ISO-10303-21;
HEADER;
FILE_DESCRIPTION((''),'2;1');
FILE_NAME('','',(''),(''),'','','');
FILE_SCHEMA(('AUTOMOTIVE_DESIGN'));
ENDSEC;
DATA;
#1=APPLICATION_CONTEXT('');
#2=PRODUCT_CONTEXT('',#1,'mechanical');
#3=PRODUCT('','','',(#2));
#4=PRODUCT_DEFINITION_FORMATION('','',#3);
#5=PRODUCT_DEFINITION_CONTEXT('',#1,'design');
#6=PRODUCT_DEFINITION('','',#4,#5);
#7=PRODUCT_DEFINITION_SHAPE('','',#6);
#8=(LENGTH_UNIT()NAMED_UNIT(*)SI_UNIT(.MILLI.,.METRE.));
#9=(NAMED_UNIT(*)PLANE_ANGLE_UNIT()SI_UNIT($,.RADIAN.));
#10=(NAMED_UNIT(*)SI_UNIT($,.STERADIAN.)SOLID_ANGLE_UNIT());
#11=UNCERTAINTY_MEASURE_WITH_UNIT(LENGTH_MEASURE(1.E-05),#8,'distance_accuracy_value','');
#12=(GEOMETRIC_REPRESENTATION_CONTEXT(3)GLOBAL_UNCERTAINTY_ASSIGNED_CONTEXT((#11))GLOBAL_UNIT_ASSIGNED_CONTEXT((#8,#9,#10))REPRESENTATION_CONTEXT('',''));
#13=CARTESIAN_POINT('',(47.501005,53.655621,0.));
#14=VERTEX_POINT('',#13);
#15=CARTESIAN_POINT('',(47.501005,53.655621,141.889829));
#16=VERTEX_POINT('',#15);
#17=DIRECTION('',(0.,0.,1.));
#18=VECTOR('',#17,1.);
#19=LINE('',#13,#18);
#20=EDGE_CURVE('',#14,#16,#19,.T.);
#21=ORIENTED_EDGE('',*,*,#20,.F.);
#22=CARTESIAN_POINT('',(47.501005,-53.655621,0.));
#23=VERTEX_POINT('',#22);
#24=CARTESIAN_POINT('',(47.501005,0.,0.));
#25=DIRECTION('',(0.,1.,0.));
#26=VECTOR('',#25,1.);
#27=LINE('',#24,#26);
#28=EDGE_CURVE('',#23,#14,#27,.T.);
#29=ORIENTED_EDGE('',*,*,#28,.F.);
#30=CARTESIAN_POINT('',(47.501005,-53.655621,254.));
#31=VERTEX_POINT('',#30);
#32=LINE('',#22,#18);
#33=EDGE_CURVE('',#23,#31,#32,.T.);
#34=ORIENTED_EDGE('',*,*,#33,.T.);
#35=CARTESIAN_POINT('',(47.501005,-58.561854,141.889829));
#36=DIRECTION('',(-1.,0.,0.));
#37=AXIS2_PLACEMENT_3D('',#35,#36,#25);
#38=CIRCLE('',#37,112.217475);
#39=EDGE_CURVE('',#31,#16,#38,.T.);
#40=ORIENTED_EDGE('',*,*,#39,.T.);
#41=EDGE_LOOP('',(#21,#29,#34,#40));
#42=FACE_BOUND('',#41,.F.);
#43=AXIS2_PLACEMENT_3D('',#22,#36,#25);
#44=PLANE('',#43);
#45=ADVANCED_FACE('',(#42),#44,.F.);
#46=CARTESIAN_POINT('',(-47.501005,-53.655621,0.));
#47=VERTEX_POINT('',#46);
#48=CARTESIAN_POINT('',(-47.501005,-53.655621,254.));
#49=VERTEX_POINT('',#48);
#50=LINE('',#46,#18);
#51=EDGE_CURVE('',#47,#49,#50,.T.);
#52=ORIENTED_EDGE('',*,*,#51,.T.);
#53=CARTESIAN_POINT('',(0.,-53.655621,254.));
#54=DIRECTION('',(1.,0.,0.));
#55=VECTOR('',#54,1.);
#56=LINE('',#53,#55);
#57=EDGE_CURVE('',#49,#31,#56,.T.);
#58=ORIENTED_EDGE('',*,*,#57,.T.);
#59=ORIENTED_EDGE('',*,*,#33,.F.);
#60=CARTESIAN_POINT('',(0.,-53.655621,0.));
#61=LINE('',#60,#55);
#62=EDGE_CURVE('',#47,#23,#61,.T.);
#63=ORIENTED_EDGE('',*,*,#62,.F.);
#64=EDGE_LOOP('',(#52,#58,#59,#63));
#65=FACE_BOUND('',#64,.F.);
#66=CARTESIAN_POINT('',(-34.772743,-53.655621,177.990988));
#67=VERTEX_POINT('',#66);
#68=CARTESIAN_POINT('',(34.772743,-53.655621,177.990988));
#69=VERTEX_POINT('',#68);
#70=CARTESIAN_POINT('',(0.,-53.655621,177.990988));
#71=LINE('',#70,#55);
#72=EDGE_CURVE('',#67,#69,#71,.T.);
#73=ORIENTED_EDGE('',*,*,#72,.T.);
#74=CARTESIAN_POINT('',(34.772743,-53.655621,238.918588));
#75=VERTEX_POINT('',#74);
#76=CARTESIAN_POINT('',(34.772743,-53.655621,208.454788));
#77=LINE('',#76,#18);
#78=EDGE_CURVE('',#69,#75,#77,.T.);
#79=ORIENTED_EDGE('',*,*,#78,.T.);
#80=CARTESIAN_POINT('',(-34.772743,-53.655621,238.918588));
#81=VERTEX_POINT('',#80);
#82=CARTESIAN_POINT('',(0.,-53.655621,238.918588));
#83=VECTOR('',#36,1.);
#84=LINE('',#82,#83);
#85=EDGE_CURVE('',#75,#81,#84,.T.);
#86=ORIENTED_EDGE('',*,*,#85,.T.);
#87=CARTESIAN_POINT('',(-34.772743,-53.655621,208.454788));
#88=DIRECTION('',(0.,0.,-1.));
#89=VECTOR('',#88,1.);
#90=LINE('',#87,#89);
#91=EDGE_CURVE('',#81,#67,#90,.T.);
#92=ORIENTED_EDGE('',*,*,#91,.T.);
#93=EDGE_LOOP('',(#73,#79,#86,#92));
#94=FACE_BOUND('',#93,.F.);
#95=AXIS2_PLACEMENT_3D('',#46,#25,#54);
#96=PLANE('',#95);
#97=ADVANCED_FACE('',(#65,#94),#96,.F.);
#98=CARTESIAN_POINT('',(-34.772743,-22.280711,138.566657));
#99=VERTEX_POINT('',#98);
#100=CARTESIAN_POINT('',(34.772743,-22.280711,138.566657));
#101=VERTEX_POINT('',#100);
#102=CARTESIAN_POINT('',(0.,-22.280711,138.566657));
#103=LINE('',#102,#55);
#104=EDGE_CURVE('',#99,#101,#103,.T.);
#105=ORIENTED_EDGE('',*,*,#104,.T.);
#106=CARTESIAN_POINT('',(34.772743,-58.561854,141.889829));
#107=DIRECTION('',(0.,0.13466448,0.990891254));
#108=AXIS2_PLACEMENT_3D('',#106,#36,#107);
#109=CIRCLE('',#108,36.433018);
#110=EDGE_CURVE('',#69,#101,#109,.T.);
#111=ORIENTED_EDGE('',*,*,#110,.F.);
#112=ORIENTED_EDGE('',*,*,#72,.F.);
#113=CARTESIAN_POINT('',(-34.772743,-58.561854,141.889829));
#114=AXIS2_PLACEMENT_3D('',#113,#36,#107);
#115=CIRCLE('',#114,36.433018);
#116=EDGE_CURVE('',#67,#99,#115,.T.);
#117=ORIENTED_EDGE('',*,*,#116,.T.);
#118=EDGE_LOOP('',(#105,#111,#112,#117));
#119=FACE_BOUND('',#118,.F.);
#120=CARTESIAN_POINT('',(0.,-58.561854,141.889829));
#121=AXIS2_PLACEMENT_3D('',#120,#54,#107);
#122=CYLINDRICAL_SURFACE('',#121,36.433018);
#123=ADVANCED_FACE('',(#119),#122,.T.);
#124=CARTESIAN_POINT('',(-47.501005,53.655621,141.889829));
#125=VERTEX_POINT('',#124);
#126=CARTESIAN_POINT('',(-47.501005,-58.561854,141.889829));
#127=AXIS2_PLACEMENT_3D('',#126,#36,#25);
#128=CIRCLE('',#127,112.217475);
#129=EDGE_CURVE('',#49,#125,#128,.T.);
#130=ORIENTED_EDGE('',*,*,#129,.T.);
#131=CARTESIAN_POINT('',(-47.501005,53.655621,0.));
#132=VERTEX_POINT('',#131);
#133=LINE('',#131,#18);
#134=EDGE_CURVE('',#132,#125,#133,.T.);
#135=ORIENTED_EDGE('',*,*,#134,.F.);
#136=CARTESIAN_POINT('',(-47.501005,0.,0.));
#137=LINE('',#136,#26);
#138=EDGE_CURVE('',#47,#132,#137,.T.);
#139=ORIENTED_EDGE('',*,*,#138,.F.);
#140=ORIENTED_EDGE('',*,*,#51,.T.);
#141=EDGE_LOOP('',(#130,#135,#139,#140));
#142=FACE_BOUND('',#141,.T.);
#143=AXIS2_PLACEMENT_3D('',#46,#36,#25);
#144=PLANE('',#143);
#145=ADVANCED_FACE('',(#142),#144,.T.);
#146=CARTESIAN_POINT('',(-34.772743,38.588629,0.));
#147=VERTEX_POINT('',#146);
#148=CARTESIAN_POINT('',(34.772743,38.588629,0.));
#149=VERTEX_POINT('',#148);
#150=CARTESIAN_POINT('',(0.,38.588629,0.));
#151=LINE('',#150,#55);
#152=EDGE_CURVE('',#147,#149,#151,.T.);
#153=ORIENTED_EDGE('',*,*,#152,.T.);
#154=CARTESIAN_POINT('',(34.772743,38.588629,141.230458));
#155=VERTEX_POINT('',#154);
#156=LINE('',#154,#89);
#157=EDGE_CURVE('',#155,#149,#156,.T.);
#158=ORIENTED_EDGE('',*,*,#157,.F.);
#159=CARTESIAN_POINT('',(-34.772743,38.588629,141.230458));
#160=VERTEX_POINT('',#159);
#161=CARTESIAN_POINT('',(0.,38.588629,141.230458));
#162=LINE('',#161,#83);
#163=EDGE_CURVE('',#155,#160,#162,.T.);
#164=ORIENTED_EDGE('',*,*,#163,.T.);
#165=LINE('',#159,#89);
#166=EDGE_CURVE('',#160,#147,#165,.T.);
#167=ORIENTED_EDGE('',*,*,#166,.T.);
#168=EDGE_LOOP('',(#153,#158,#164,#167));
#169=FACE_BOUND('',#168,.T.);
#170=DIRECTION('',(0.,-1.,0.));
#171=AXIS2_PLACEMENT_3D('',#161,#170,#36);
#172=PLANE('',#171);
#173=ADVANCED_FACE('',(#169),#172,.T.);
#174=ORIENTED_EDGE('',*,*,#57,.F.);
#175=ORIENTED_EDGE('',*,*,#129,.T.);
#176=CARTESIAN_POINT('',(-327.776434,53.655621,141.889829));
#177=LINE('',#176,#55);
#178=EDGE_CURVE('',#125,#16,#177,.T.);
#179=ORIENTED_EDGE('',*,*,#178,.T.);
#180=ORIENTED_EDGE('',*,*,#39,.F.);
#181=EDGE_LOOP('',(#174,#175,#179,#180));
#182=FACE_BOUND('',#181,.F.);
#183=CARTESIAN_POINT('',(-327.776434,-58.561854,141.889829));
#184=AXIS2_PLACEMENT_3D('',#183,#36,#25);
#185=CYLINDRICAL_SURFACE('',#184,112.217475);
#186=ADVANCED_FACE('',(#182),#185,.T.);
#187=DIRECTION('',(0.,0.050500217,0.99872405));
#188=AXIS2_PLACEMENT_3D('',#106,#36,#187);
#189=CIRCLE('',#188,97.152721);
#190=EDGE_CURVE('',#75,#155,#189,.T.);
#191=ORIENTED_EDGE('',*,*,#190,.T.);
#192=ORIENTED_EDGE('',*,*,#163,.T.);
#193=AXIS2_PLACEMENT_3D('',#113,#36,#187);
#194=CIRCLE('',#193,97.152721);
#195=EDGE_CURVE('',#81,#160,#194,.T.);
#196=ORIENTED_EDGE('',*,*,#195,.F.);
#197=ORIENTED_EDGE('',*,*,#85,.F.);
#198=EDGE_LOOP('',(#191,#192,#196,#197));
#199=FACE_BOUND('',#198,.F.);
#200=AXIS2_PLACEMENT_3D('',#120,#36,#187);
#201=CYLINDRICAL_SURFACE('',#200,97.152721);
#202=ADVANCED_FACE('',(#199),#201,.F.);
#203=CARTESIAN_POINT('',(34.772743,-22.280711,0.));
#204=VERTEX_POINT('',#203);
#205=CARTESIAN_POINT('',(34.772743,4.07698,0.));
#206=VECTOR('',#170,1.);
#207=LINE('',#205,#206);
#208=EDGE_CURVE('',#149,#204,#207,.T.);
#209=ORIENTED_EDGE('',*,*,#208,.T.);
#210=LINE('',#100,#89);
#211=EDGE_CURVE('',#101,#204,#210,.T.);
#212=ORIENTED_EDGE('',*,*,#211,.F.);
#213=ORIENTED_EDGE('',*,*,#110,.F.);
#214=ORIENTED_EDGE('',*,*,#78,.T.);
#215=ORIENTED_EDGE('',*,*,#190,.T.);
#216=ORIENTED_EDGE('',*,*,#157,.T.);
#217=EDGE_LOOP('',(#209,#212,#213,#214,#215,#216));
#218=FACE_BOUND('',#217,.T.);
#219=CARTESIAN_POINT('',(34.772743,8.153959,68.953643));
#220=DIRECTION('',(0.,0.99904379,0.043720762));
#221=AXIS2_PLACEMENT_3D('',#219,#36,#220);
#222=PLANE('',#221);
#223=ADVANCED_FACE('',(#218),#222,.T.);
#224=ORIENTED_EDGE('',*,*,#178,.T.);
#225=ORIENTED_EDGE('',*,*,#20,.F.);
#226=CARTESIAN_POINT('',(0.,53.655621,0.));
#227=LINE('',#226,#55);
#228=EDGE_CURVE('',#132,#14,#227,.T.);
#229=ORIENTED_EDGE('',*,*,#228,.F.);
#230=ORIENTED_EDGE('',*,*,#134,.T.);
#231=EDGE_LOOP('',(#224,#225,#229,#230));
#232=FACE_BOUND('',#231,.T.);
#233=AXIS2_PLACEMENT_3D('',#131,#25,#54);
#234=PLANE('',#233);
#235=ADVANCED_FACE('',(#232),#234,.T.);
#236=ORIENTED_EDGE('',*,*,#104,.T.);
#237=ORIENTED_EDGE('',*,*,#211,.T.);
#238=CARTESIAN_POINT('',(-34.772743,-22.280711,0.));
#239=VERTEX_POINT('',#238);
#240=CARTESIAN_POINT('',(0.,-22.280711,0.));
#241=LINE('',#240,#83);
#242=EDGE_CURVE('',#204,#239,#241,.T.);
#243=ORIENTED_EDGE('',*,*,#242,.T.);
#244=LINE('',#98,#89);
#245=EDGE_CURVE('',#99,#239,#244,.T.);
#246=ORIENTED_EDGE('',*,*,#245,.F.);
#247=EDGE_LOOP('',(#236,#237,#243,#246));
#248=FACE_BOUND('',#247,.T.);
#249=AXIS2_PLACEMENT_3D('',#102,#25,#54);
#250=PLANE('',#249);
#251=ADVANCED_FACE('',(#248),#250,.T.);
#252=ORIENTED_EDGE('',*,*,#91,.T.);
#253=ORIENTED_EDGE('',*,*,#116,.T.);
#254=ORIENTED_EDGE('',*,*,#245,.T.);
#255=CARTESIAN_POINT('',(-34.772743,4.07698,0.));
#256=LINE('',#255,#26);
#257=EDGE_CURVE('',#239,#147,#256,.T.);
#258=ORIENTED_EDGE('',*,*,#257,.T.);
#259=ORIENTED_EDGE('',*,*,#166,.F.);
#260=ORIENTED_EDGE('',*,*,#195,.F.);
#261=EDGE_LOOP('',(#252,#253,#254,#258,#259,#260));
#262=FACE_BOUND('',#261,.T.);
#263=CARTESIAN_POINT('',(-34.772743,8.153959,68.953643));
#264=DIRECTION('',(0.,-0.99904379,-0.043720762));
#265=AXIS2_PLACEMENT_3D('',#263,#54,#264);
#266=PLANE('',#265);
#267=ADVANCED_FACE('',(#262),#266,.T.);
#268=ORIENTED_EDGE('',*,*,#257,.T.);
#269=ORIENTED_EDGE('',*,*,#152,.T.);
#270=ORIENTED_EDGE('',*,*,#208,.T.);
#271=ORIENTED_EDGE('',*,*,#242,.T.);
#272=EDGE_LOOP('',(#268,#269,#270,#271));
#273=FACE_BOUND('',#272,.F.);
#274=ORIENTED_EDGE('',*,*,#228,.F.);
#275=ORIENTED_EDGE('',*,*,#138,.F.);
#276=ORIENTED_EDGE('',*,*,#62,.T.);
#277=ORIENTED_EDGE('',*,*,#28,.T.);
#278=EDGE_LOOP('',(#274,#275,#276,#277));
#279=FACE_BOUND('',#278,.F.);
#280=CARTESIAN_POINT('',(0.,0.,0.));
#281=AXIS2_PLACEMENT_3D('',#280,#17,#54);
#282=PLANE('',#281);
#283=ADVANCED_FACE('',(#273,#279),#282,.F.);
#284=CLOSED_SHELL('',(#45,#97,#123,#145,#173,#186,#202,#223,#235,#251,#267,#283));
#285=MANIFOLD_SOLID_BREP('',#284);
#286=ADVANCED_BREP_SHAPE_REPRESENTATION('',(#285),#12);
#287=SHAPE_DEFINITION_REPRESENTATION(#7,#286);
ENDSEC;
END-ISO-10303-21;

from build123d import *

# Parameters (mm, degrees)
F0_W        = 95.0020104647
F0_H        = 107.3112413287
F1_DEPTH    = 254
F2_T1_DEPTH = 655.5528673222
F3_W        = 69.5454850793
F3_H        = 60.9275996685


# Not quite as in the source:
# - a fillet or chamfer that OpenCascade refuses, or shapes differently, is made with other operations: its cross-section is extruded or revolved along the edge and cut away or added


with BuildPart() as f1:
    # F0 (on Top) → F1 (new body)
    with BuildSketch(Plane.XY):
        Rectangle(F0_W, F0_H)
    extrude(amount=F1_DEPTH)

    # F2: fillet of radius 112.2174748062 on 1 edges, made by hand

    # F2_s2 → F2_t1 (cut)
    with BuildSketch(Plane.YZ.offset(-327.7764336611)):
        with BuildLine():
            ThreePointArc((53.6556206644, 141.8898286285), (22.5039425406, 219.4855647234), (-53.6556206644, 254))
            Line((-53.6556206644, 254), (53.6556206644, 254))
            Line((53.6556206644, 254), (53.6556206644, 141.8898286285))
        make_face()
    extrude(amount=F2_T1_DEPTH, mode=Mode.SUBTRACT)

    # F4: sweep along a path in F4_path
    with BuildLine(Plane(origin=(-47.5010052323, -53.6556206644, 254), x_dir=(0, 0, 1), z_dir=(1, 0, 0))) as f4_path:
        ThreePointArc((0, 0), (-34.5144352766, -76.159563205), (-112.1101713715, -107.3112413288))
        Line((-112.1101713715, -107.3112413288), (-254, -107.3112413288))
    # F3 (on face) → F4 (sweep, cut)
    with BuildSketch(Plane.XZ.offset(53.6556206644)):
        with Locations((0, 208.4547877312)):
            Rectangle(F3_W, F3_H)
    sweep(path=f4_path.line, mode=Mode.SUBTRACT)


solid = f1.part
